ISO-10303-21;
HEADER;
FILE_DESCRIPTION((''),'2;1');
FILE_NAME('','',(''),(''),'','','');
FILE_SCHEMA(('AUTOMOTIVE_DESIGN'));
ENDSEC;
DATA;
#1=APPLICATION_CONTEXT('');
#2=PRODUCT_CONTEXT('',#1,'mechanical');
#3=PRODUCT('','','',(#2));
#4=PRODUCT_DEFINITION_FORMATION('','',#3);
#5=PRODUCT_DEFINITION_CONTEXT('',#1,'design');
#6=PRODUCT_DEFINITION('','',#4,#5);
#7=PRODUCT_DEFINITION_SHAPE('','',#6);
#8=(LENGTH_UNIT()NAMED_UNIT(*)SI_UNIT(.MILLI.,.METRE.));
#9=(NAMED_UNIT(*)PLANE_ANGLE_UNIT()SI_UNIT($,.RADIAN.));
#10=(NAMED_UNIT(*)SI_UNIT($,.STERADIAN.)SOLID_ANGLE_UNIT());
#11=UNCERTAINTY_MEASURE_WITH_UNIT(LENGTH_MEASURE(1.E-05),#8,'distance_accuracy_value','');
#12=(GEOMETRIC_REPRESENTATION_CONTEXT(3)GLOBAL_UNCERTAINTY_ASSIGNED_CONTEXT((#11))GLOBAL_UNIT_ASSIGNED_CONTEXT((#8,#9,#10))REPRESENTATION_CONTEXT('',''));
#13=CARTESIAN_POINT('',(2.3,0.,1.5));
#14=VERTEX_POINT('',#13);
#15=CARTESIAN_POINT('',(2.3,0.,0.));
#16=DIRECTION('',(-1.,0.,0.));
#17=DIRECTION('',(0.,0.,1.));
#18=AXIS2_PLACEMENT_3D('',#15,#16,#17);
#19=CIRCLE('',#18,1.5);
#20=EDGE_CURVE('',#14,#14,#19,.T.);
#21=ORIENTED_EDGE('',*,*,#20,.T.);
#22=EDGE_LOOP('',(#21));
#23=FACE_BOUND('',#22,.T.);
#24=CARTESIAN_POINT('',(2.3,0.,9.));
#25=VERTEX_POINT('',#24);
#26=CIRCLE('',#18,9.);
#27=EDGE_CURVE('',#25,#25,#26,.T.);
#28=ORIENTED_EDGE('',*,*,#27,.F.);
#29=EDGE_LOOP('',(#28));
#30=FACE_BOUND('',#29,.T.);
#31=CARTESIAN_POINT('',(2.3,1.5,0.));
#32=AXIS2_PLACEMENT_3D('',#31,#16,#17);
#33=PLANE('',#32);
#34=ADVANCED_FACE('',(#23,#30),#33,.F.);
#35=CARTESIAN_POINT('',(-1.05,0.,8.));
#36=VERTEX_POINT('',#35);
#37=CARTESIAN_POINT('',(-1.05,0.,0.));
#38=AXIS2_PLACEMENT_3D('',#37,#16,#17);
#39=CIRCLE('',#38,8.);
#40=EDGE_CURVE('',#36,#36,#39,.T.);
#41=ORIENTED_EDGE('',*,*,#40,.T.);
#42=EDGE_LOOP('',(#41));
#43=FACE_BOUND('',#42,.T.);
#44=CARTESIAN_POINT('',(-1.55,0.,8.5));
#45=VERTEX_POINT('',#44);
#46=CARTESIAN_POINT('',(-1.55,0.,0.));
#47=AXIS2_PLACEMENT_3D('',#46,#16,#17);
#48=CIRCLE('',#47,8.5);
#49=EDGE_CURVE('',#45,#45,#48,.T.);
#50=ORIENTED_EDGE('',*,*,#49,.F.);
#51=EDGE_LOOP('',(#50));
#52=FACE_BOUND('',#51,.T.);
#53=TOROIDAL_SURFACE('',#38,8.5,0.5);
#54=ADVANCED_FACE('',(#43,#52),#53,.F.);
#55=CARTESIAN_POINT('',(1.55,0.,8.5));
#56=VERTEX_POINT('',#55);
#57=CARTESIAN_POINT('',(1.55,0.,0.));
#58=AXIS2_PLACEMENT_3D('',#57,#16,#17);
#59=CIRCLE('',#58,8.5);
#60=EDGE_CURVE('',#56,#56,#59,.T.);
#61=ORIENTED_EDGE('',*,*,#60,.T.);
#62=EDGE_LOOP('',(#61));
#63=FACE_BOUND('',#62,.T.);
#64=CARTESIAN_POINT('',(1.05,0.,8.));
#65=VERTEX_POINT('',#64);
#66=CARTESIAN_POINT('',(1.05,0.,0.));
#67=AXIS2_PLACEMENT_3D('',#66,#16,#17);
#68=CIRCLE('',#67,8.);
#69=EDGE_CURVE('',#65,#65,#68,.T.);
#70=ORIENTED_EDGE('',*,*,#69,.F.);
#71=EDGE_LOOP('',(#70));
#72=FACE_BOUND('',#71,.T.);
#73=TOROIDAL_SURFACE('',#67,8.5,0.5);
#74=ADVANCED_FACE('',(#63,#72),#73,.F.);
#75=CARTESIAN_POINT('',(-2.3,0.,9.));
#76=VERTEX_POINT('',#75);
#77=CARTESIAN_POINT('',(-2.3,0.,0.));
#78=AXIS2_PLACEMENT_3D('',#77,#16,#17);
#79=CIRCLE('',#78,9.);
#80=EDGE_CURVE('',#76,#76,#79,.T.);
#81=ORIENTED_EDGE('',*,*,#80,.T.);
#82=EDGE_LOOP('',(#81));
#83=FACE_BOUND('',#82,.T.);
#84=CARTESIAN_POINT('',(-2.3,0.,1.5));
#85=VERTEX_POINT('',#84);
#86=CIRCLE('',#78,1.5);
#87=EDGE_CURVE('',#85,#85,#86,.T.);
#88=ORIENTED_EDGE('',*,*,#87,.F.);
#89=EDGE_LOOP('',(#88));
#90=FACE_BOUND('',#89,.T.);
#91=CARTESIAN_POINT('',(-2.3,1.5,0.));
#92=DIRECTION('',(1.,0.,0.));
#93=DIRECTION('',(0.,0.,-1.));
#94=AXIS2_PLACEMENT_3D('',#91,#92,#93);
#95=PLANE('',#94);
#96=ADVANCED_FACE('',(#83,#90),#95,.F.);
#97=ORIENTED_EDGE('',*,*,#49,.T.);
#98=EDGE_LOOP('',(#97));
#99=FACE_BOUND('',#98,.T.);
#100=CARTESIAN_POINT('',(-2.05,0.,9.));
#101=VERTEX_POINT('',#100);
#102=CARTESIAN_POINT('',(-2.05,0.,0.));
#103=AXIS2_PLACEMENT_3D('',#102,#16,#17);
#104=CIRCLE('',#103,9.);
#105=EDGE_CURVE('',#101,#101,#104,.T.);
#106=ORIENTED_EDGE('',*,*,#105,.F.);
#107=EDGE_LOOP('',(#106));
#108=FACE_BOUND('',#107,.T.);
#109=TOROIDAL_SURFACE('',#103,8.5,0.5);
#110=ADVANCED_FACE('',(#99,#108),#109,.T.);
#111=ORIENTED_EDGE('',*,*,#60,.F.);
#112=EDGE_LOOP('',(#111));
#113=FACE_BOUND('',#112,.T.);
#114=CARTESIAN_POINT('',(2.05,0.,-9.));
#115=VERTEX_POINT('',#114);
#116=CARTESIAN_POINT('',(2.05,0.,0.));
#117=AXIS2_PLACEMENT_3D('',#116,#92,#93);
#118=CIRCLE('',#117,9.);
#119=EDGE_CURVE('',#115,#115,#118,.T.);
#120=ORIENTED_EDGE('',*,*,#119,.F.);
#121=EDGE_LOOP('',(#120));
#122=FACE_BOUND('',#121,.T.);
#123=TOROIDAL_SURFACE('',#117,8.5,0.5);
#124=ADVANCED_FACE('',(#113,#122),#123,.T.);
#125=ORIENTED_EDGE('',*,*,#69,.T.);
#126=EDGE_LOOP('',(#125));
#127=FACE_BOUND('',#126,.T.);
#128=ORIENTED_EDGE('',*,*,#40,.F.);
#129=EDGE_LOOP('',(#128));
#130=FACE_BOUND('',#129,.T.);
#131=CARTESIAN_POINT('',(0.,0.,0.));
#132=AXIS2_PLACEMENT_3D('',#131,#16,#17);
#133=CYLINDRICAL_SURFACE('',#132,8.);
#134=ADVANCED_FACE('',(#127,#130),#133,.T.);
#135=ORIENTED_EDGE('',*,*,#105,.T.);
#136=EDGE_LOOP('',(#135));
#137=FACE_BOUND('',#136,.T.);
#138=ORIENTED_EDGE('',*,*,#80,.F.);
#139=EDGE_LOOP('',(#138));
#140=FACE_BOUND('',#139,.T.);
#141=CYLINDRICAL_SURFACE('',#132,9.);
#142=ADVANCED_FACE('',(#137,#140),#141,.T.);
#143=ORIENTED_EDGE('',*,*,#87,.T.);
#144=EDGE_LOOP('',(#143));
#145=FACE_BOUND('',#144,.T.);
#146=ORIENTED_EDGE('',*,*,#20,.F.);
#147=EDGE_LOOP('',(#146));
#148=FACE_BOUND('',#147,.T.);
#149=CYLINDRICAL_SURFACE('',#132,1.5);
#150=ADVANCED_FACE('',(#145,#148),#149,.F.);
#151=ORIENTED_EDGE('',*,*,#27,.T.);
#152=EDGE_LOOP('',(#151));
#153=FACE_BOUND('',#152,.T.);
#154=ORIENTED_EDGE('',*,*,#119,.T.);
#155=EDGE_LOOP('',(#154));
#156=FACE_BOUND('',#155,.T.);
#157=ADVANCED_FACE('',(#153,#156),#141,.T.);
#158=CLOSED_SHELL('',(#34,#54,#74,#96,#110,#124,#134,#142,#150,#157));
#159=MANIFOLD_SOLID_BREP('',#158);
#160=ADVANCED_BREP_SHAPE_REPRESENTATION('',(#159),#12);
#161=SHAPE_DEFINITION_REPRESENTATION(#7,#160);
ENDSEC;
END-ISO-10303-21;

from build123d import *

# Parameters (mm, degrees)
FILLET1_R = 0.5


with BuildPart() as part:
    # Sketch1 → Revolve1 (revolve)
    with BuildSketch(Plane.XY, mode=Mode.PRIVATE) as revolve1_sk:
        with BuildLine():
            Line((-2.3, 1.5), (2.3, 1.5))
            Line((2.3, 1.5), (2.3, 9))
            Line((2.3, 9), (1.55, 9))
            Line((1.55, 9), (1.55, 8.5))
            ThreePointArc((1.55, 8.5), (1.403553391, 8.146446609), (1.05, 8))
            Line((1.05, 8), (-1.05, 8))
            ThreePointArc((-1.05, 8), (-1.403553391, 8.146446609), (-1.55, 8.5))
            Line((-1.55, 8.5), (-1.55, 9))
            Line((-1.55, 9), (-2.3, 9))
            Line((-2.3, 9), (-2.3, 1.5))
        make_face()
    revolve(revolve1_sk.sketch.rotate(Axis((0, 0, 0), (1, 0, 0)), 90), axis=Axis((0, 0, 0), (1, 0, 0)))

    # Fillet1
    fillet1_edges = [part.edges().sort_by_distance(p)[0] for p in [
        (1.55, 0, -9),
        (-1.55, 0, -9),
    ]]
    fillet(fillet1_edges, radius=FILLET1_R - 0.0001)  # a hair under: the kernel refuses the full size


solid = part.part
